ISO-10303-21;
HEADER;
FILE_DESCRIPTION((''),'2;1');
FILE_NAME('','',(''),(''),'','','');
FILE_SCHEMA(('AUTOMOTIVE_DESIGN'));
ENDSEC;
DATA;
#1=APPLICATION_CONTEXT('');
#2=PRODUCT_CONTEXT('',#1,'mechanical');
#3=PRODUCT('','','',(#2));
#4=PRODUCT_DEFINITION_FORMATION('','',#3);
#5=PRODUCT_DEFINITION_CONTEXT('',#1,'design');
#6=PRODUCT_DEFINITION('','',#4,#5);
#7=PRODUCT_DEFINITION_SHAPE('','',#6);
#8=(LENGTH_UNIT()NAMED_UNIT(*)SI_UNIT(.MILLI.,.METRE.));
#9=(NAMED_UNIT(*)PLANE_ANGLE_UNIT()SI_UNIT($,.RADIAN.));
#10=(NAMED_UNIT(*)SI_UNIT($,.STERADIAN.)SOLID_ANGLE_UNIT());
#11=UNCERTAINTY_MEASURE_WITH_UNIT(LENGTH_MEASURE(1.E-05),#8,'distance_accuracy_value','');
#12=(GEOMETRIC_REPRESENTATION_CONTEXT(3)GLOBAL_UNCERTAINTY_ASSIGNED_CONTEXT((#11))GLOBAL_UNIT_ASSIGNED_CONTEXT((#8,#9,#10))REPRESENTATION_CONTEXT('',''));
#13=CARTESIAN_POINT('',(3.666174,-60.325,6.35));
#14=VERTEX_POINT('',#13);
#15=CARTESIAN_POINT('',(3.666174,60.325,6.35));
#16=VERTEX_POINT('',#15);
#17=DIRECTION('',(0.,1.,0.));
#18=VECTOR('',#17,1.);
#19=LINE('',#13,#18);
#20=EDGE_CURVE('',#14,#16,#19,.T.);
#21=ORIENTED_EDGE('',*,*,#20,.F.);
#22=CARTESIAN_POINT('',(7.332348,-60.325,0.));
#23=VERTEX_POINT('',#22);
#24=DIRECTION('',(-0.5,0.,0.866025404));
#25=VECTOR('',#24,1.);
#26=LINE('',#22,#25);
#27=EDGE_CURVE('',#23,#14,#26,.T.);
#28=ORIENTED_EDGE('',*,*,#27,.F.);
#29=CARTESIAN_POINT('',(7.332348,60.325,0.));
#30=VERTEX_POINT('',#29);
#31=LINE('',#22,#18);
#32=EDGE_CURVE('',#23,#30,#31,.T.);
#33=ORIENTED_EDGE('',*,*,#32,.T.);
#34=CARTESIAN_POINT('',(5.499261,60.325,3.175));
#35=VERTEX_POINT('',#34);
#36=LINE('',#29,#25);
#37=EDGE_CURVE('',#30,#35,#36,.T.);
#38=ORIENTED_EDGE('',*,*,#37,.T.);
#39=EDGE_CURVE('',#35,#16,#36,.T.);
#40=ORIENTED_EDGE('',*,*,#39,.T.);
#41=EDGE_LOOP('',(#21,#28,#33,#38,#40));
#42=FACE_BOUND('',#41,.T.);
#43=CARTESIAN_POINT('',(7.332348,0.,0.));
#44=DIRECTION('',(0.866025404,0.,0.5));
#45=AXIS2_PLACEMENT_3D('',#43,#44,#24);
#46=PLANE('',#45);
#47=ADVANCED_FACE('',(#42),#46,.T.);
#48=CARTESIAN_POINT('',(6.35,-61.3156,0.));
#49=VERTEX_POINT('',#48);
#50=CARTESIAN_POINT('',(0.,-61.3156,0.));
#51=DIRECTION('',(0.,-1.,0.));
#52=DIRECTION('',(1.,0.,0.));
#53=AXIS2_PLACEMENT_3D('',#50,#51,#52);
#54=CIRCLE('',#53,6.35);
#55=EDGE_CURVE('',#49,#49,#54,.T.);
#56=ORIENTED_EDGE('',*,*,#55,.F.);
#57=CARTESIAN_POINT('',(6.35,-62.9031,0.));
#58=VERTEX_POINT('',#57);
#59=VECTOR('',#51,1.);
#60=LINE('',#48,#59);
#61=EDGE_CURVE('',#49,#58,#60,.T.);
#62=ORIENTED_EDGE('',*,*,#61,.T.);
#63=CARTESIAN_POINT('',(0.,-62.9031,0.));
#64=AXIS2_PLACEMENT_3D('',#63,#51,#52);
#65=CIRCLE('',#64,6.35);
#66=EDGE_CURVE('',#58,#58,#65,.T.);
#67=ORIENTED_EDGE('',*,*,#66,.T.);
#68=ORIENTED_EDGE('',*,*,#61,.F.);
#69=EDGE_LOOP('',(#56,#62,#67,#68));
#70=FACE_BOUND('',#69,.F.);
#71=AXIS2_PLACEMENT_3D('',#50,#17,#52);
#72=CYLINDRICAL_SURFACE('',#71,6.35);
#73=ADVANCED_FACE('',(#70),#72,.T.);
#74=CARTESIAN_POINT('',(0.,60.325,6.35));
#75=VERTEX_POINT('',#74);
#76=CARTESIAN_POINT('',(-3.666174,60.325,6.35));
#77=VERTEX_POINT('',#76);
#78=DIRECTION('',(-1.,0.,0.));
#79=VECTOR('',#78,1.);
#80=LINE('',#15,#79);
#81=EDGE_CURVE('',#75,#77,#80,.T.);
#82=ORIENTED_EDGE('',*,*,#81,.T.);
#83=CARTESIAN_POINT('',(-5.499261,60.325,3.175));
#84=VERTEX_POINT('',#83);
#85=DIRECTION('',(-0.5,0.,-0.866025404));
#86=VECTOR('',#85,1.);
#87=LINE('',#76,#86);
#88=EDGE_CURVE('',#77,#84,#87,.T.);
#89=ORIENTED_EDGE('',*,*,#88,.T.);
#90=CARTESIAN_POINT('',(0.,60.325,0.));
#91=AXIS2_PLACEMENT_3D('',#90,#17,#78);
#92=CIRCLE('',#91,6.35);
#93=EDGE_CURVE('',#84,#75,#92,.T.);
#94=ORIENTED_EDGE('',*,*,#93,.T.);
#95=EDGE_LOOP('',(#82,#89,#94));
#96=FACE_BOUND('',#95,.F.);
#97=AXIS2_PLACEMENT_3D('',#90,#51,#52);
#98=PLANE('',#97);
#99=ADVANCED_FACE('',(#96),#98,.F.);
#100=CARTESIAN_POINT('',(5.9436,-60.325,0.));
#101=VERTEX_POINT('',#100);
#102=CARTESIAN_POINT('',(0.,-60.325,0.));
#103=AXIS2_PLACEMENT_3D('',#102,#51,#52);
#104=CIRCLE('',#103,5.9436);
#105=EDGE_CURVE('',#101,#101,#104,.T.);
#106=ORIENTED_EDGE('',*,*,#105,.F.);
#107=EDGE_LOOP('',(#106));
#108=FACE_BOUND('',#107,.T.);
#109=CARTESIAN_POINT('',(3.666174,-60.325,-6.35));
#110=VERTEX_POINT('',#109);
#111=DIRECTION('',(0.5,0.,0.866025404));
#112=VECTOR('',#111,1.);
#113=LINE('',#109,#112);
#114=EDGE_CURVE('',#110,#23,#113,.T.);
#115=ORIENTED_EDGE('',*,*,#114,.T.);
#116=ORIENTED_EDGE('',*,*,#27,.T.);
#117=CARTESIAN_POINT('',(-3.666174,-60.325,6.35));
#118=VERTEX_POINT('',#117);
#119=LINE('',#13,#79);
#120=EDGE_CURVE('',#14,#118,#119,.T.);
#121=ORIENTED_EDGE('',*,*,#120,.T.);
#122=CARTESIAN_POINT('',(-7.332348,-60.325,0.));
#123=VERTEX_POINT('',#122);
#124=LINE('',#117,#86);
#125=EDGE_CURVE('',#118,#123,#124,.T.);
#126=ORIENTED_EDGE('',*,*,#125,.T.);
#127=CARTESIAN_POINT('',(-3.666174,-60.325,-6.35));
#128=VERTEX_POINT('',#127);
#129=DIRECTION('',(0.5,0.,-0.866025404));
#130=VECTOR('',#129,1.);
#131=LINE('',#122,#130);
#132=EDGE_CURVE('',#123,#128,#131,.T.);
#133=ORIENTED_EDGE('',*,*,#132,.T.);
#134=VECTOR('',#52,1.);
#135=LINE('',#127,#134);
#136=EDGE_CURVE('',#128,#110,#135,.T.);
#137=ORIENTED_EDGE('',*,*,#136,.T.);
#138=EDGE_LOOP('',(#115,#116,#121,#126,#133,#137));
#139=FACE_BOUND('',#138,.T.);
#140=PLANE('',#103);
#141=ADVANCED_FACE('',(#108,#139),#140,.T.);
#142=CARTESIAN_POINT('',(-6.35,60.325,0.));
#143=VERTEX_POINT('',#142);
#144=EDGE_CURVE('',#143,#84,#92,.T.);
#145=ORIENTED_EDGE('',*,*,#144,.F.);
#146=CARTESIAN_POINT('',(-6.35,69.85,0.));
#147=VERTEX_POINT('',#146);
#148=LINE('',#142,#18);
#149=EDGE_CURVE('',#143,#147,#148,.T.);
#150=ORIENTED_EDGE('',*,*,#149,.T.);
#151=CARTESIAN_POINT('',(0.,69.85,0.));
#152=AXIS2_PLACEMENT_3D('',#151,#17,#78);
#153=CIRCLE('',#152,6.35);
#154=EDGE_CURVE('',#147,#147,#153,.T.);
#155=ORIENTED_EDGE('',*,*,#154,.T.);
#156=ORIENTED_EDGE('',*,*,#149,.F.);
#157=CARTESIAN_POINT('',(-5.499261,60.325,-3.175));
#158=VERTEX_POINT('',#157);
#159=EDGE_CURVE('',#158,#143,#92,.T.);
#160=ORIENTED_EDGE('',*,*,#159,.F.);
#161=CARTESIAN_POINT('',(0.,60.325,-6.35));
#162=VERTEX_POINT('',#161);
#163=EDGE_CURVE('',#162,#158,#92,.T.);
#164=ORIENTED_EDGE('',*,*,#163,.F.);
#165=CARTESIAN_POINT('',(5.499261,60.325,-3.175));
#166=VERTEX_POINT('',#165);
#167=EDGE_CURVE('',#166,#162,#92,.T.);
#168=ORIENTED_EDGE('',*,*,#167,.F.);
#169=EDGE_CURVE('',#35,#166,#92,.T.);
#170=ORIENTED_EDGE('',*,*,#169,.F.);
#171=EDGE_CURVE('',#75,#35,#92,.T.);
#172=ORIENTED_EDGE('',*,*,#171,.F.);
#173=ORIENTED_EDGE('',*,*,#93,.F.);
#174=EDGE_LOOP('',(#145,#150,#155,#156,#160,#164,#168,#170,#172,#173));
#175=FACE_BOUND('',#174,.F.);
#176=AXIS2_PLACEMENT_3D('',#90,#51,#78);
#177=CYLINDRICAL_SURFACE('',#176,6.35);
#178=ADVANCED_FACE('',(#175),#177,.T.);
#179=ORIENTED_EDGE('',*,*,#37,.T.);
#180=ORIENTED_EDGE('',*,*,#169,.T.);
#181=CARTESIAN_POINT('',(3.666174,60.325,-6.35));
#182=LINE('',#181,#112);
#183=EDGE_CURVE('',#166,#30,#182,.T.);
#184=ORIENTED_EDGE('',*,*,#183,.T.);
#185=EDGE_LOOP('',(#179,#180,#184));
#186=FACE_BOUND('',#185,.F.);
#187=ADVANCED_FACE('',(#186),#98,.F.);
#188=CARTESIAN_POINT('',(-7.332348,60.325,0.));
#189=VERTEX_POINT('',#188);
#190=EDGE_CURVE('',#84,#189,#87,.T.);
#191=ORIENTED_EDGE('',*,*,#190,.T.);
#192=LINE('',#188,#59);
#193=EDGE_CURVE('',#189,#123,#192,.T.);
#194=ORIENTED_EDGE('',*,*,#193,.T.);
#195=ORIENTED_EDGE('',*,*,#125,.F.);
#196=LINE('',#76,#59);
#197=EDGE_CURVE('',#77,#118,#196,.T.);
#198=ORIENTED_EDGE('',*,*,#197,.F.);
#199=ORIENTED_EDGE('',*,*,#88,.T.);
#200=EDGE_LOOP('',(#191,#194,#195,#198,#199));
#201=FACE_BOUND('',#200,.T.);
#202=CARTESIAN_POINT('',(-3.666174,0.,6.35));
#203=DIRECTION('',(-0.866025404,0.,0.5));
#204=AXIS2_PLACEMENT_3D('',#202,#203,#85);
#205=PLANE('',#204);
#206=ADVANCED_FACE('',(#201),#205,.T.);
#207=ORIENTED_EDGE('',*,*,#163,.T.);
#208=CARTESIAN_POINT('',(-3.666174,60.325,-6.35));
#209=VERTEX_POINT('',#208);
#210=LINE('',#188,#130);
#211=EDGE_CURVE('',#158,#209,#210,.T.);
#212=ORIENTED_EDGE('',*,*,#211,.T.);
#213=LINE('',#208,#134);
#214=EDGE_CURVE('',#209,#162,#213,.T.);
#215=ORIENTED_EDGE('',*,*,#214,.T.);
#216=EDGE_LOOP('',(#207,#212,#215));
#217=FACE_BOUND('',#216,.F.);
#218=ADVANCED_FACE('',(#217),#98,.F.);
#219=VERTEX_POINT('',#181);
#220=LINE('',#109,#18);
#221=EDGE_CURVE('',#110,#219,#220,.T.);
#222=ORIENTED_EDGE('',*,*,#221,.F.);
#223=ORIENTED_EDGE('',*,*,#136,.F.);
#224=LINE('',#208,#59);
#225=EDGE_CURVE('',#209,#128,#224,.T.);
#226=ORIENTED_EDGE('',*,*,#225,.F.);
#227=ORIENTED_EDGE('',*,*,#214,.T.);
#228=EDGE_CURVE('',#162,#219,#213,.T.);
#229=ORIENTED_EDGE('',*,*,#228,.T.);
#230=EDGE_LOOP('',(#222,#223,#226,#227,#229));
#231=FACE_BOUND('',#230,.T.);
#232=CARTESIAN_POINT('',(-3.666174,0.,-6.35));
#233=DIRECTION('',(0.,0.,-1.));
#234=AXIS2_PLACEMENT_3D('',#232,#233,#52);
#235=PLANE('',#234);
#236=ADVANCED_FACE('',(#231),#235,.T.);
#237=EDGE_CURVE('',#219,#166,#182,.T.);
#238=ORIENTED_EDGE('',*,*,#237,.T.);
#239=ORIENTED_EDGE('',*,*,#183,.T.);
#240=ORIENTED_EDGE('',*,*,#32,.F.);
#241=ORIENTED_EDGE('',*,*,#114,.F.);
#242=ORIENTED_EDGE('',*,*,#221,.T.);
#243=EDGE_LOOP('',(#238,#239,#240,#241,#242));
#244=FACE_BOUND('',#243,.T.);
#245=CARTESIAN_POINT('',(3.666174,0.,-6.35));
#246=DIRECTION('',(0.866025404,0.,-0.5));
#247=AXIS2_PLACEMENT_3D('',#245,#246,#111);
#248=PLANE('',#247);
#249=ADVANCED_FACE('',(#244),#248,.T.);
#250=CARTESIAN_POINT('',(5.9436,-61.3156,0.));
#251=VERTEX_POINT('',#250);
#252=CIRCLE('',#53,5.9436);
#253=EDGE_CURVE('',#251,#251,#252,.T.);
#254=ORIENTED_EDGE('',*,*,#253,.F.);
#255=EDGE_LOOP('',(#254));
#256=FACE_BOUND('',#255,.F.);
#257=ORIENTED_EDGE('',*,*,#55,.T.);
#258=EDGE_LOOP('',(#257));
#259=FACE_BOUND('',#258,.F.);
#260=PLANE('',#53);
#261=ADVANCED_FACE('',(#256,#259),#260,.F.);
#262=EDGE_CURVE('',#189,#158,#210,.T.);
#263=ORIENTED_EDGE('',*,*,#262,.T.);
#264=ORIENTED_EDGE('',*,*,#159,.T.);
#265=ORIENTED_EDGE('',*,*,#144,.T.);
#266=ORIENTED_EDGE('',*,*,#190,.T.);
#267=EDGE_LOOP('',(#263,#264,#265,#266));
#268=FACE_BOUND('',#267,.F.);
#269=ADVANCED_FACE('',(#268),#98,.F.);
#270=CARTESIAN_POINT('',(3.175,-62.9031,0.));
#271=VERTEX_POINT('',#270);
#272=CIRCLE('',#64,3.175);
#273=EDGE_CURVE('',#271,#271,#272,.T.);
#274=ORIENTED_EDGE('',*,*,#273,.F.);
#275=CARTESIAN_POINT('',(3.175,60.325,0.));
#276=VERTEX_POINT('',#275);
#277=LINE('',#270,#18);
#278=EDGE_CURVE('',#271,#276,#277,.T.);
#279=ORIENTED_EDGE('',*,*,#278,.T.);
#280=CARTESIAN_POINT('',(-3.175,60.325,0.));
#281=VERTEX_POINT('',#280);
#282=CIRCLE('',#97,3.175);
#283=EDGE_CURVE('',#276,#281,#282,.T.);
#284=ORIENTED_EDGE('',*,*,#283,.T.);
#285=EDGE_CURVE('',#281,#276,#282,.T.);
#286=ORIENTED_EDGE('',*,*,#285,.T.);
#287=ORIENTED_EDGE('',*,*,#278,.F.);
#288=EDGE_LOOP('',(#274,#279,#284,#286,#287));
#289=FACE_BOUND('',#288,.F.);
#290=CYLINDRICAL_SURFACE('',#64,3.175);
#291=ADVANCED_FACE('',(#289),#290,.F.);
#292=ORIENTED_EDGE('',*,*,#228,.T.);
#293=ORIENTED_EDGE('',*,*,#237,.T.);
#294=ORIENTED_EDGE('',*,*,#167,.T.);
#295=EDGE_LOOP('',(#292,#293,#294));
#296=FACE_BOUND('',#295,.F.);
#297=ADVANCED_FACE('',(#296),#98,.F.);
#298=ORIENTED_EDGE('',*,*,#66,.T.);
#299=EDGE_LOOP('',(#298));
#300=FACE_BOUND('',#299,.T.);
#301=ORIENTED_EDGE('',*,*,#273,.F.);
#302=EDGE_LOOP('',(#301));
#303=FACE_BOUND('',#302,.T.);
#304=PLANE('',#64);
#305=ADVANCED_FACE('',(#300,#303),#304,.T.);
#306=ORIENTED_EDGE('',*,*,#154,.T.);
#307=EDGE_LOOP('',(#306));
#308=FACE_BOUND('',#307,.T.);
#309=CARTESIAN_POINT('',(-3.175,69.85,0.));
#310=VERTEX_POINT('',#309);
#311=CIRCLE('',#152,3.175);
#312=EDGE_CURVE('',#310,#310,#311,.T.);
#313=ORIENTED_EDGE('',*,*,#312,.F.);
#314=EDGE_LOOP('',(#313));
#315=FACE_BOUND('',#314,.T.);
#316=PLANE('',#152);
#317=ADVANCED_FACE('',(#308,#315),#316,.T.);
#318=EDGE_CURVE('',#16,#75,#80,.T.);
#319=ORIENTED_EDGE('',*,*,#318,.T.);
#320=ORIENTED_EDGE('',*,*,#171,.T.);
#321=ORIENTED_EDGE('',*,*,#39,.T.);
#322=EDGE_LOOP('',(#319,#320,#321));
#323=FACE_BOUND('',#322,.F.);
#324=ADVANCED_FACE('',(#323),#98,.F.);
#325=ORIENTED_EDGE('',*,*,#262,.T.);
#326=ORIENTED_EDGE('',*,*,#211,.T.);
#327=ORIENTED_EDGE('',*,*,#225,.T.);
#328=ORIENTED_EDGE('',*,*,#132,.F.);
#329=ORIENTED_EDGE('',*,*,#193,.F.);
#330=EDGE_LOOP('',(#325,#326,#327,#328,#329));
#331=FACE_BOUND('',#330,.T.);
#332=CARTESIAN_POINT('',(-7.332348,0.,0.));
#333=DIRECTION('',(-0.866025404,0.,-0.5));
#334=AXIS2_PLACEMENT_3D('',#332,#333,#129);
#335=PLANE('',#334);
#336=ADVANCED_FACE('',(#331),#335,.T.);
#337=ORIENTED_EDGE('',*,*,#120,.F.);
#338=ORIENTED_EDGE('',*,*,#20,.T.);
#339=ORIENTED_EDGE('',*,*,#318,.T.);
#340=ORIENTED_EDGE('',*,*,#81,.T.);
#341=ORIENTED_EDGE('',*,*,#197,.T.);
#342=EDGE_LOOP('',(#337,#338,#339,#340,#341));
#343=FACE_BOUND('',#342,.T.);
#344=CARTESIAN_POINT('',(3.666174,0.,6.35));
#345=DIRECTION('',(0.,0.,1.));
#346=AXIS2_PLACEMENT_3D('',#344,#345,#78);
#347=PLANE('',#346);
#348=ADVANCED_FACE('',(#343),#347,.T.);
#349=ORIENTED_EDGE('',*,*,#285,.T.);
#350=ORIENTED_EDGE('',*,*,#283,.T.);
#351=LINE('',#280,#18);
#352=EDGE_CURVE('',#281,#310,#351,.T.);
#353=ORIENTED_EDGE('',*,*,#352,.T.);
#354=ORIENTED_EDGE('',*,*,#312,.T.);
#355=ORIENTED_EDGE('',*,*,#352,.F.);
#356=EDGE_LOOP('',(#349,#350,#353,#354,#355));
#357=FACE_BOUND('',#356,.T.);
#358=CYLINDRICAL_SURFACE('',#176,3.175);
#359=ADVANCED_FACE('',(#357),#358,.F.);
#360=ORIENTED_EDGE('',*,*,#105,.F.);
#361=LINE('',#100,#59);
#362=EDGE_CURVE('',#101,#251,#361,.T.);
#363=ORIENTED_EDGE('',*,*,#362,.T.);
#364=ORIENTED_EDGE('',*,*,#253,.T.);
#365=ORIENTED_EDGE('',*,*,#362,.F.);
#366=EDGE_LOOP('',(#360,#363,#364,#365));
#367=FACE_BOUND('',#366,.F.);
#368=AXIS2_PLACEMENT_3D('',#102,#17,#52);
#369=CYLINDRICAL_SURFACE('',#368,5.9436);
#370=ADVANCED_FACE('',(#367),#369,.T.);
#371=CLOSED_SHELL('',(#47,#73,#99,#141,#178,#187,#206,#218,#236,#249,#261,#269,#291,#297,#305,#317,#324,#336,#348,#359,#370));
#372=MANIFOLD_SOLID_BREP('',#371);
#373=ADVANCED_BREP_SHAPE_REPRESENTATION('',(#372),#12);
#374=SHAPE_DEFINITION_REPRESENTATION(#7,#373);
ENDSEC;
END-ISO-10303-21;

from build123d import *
from build123d import SkipClean  # not in build123d's __all__

# Parameters (mm, degrees)
F1_DEPTH      = 60.325
F1_DEPTH_BACK = 60.325
F2_R          = 5.9436
F3_DEPTH      = 0.9906
F4_R          = 6.35
F5_DEPTH      = 1.5875
F6_R          = 3.175
F7_DEPTH      = 123.2291
F8_R          = 6.35
F8_R_2        = 3.175
F9_DEPTH      = 9.525


with BuildPart() as f1:
    # F0 (on Front) → F1 (new body, two sides)
    with BuildSketch(Plane.XZ) as f1_sk:
        Polygon((3.6661742094, 6.35), (-3.6661742094, 6.35), (-7.3323484187, 0), (-3.6661742094, -6.35), (3.6661742094, -6.35), (7.3323484187, 0), align=None)
    extrude(amount=F1_DEPTH)
    extrude(f1_sk.sketch, amount=-F1_DEPTH_BACK)

    # F2 (on face) → F3 (join)
    with BuildSketch(Plane.XZ.offset(60.325)):
        Circle(F2_R)
    extrude(amount=F3_DEPTH)

    # F4 (on face) → F5 (join)
    with BuildSketch(Plane.XZ.offset(61.3156)):
        Circle(F4_R)
    extrude(amount=F5_DEPTH)

    # F6 (on face) → F7 (cut, through all)
    with BuildSketch(Plane.XZ.offset(62.9031)):
        Circle(F6_R)
    extrude(amount=-F7_DEPTH, mode=Mode.SUBTRACT)

    # F8 (on face) → F9 (join)
    with BuildSketch(Plane(origin=(0, 60.325, 0), x_dir=(-1, 0, 0), z_dir=(0, 1, 0))):
        Circle(F8_R)
        Circle(F8_R_2, mode=Mode.SUBTRACT)
    with SkipClean():  # cleaning this boolean's faces spoils the solid; the shape is the same uncleaned
        extrude(amount=F9_DEPTH)


solid = f1.part
